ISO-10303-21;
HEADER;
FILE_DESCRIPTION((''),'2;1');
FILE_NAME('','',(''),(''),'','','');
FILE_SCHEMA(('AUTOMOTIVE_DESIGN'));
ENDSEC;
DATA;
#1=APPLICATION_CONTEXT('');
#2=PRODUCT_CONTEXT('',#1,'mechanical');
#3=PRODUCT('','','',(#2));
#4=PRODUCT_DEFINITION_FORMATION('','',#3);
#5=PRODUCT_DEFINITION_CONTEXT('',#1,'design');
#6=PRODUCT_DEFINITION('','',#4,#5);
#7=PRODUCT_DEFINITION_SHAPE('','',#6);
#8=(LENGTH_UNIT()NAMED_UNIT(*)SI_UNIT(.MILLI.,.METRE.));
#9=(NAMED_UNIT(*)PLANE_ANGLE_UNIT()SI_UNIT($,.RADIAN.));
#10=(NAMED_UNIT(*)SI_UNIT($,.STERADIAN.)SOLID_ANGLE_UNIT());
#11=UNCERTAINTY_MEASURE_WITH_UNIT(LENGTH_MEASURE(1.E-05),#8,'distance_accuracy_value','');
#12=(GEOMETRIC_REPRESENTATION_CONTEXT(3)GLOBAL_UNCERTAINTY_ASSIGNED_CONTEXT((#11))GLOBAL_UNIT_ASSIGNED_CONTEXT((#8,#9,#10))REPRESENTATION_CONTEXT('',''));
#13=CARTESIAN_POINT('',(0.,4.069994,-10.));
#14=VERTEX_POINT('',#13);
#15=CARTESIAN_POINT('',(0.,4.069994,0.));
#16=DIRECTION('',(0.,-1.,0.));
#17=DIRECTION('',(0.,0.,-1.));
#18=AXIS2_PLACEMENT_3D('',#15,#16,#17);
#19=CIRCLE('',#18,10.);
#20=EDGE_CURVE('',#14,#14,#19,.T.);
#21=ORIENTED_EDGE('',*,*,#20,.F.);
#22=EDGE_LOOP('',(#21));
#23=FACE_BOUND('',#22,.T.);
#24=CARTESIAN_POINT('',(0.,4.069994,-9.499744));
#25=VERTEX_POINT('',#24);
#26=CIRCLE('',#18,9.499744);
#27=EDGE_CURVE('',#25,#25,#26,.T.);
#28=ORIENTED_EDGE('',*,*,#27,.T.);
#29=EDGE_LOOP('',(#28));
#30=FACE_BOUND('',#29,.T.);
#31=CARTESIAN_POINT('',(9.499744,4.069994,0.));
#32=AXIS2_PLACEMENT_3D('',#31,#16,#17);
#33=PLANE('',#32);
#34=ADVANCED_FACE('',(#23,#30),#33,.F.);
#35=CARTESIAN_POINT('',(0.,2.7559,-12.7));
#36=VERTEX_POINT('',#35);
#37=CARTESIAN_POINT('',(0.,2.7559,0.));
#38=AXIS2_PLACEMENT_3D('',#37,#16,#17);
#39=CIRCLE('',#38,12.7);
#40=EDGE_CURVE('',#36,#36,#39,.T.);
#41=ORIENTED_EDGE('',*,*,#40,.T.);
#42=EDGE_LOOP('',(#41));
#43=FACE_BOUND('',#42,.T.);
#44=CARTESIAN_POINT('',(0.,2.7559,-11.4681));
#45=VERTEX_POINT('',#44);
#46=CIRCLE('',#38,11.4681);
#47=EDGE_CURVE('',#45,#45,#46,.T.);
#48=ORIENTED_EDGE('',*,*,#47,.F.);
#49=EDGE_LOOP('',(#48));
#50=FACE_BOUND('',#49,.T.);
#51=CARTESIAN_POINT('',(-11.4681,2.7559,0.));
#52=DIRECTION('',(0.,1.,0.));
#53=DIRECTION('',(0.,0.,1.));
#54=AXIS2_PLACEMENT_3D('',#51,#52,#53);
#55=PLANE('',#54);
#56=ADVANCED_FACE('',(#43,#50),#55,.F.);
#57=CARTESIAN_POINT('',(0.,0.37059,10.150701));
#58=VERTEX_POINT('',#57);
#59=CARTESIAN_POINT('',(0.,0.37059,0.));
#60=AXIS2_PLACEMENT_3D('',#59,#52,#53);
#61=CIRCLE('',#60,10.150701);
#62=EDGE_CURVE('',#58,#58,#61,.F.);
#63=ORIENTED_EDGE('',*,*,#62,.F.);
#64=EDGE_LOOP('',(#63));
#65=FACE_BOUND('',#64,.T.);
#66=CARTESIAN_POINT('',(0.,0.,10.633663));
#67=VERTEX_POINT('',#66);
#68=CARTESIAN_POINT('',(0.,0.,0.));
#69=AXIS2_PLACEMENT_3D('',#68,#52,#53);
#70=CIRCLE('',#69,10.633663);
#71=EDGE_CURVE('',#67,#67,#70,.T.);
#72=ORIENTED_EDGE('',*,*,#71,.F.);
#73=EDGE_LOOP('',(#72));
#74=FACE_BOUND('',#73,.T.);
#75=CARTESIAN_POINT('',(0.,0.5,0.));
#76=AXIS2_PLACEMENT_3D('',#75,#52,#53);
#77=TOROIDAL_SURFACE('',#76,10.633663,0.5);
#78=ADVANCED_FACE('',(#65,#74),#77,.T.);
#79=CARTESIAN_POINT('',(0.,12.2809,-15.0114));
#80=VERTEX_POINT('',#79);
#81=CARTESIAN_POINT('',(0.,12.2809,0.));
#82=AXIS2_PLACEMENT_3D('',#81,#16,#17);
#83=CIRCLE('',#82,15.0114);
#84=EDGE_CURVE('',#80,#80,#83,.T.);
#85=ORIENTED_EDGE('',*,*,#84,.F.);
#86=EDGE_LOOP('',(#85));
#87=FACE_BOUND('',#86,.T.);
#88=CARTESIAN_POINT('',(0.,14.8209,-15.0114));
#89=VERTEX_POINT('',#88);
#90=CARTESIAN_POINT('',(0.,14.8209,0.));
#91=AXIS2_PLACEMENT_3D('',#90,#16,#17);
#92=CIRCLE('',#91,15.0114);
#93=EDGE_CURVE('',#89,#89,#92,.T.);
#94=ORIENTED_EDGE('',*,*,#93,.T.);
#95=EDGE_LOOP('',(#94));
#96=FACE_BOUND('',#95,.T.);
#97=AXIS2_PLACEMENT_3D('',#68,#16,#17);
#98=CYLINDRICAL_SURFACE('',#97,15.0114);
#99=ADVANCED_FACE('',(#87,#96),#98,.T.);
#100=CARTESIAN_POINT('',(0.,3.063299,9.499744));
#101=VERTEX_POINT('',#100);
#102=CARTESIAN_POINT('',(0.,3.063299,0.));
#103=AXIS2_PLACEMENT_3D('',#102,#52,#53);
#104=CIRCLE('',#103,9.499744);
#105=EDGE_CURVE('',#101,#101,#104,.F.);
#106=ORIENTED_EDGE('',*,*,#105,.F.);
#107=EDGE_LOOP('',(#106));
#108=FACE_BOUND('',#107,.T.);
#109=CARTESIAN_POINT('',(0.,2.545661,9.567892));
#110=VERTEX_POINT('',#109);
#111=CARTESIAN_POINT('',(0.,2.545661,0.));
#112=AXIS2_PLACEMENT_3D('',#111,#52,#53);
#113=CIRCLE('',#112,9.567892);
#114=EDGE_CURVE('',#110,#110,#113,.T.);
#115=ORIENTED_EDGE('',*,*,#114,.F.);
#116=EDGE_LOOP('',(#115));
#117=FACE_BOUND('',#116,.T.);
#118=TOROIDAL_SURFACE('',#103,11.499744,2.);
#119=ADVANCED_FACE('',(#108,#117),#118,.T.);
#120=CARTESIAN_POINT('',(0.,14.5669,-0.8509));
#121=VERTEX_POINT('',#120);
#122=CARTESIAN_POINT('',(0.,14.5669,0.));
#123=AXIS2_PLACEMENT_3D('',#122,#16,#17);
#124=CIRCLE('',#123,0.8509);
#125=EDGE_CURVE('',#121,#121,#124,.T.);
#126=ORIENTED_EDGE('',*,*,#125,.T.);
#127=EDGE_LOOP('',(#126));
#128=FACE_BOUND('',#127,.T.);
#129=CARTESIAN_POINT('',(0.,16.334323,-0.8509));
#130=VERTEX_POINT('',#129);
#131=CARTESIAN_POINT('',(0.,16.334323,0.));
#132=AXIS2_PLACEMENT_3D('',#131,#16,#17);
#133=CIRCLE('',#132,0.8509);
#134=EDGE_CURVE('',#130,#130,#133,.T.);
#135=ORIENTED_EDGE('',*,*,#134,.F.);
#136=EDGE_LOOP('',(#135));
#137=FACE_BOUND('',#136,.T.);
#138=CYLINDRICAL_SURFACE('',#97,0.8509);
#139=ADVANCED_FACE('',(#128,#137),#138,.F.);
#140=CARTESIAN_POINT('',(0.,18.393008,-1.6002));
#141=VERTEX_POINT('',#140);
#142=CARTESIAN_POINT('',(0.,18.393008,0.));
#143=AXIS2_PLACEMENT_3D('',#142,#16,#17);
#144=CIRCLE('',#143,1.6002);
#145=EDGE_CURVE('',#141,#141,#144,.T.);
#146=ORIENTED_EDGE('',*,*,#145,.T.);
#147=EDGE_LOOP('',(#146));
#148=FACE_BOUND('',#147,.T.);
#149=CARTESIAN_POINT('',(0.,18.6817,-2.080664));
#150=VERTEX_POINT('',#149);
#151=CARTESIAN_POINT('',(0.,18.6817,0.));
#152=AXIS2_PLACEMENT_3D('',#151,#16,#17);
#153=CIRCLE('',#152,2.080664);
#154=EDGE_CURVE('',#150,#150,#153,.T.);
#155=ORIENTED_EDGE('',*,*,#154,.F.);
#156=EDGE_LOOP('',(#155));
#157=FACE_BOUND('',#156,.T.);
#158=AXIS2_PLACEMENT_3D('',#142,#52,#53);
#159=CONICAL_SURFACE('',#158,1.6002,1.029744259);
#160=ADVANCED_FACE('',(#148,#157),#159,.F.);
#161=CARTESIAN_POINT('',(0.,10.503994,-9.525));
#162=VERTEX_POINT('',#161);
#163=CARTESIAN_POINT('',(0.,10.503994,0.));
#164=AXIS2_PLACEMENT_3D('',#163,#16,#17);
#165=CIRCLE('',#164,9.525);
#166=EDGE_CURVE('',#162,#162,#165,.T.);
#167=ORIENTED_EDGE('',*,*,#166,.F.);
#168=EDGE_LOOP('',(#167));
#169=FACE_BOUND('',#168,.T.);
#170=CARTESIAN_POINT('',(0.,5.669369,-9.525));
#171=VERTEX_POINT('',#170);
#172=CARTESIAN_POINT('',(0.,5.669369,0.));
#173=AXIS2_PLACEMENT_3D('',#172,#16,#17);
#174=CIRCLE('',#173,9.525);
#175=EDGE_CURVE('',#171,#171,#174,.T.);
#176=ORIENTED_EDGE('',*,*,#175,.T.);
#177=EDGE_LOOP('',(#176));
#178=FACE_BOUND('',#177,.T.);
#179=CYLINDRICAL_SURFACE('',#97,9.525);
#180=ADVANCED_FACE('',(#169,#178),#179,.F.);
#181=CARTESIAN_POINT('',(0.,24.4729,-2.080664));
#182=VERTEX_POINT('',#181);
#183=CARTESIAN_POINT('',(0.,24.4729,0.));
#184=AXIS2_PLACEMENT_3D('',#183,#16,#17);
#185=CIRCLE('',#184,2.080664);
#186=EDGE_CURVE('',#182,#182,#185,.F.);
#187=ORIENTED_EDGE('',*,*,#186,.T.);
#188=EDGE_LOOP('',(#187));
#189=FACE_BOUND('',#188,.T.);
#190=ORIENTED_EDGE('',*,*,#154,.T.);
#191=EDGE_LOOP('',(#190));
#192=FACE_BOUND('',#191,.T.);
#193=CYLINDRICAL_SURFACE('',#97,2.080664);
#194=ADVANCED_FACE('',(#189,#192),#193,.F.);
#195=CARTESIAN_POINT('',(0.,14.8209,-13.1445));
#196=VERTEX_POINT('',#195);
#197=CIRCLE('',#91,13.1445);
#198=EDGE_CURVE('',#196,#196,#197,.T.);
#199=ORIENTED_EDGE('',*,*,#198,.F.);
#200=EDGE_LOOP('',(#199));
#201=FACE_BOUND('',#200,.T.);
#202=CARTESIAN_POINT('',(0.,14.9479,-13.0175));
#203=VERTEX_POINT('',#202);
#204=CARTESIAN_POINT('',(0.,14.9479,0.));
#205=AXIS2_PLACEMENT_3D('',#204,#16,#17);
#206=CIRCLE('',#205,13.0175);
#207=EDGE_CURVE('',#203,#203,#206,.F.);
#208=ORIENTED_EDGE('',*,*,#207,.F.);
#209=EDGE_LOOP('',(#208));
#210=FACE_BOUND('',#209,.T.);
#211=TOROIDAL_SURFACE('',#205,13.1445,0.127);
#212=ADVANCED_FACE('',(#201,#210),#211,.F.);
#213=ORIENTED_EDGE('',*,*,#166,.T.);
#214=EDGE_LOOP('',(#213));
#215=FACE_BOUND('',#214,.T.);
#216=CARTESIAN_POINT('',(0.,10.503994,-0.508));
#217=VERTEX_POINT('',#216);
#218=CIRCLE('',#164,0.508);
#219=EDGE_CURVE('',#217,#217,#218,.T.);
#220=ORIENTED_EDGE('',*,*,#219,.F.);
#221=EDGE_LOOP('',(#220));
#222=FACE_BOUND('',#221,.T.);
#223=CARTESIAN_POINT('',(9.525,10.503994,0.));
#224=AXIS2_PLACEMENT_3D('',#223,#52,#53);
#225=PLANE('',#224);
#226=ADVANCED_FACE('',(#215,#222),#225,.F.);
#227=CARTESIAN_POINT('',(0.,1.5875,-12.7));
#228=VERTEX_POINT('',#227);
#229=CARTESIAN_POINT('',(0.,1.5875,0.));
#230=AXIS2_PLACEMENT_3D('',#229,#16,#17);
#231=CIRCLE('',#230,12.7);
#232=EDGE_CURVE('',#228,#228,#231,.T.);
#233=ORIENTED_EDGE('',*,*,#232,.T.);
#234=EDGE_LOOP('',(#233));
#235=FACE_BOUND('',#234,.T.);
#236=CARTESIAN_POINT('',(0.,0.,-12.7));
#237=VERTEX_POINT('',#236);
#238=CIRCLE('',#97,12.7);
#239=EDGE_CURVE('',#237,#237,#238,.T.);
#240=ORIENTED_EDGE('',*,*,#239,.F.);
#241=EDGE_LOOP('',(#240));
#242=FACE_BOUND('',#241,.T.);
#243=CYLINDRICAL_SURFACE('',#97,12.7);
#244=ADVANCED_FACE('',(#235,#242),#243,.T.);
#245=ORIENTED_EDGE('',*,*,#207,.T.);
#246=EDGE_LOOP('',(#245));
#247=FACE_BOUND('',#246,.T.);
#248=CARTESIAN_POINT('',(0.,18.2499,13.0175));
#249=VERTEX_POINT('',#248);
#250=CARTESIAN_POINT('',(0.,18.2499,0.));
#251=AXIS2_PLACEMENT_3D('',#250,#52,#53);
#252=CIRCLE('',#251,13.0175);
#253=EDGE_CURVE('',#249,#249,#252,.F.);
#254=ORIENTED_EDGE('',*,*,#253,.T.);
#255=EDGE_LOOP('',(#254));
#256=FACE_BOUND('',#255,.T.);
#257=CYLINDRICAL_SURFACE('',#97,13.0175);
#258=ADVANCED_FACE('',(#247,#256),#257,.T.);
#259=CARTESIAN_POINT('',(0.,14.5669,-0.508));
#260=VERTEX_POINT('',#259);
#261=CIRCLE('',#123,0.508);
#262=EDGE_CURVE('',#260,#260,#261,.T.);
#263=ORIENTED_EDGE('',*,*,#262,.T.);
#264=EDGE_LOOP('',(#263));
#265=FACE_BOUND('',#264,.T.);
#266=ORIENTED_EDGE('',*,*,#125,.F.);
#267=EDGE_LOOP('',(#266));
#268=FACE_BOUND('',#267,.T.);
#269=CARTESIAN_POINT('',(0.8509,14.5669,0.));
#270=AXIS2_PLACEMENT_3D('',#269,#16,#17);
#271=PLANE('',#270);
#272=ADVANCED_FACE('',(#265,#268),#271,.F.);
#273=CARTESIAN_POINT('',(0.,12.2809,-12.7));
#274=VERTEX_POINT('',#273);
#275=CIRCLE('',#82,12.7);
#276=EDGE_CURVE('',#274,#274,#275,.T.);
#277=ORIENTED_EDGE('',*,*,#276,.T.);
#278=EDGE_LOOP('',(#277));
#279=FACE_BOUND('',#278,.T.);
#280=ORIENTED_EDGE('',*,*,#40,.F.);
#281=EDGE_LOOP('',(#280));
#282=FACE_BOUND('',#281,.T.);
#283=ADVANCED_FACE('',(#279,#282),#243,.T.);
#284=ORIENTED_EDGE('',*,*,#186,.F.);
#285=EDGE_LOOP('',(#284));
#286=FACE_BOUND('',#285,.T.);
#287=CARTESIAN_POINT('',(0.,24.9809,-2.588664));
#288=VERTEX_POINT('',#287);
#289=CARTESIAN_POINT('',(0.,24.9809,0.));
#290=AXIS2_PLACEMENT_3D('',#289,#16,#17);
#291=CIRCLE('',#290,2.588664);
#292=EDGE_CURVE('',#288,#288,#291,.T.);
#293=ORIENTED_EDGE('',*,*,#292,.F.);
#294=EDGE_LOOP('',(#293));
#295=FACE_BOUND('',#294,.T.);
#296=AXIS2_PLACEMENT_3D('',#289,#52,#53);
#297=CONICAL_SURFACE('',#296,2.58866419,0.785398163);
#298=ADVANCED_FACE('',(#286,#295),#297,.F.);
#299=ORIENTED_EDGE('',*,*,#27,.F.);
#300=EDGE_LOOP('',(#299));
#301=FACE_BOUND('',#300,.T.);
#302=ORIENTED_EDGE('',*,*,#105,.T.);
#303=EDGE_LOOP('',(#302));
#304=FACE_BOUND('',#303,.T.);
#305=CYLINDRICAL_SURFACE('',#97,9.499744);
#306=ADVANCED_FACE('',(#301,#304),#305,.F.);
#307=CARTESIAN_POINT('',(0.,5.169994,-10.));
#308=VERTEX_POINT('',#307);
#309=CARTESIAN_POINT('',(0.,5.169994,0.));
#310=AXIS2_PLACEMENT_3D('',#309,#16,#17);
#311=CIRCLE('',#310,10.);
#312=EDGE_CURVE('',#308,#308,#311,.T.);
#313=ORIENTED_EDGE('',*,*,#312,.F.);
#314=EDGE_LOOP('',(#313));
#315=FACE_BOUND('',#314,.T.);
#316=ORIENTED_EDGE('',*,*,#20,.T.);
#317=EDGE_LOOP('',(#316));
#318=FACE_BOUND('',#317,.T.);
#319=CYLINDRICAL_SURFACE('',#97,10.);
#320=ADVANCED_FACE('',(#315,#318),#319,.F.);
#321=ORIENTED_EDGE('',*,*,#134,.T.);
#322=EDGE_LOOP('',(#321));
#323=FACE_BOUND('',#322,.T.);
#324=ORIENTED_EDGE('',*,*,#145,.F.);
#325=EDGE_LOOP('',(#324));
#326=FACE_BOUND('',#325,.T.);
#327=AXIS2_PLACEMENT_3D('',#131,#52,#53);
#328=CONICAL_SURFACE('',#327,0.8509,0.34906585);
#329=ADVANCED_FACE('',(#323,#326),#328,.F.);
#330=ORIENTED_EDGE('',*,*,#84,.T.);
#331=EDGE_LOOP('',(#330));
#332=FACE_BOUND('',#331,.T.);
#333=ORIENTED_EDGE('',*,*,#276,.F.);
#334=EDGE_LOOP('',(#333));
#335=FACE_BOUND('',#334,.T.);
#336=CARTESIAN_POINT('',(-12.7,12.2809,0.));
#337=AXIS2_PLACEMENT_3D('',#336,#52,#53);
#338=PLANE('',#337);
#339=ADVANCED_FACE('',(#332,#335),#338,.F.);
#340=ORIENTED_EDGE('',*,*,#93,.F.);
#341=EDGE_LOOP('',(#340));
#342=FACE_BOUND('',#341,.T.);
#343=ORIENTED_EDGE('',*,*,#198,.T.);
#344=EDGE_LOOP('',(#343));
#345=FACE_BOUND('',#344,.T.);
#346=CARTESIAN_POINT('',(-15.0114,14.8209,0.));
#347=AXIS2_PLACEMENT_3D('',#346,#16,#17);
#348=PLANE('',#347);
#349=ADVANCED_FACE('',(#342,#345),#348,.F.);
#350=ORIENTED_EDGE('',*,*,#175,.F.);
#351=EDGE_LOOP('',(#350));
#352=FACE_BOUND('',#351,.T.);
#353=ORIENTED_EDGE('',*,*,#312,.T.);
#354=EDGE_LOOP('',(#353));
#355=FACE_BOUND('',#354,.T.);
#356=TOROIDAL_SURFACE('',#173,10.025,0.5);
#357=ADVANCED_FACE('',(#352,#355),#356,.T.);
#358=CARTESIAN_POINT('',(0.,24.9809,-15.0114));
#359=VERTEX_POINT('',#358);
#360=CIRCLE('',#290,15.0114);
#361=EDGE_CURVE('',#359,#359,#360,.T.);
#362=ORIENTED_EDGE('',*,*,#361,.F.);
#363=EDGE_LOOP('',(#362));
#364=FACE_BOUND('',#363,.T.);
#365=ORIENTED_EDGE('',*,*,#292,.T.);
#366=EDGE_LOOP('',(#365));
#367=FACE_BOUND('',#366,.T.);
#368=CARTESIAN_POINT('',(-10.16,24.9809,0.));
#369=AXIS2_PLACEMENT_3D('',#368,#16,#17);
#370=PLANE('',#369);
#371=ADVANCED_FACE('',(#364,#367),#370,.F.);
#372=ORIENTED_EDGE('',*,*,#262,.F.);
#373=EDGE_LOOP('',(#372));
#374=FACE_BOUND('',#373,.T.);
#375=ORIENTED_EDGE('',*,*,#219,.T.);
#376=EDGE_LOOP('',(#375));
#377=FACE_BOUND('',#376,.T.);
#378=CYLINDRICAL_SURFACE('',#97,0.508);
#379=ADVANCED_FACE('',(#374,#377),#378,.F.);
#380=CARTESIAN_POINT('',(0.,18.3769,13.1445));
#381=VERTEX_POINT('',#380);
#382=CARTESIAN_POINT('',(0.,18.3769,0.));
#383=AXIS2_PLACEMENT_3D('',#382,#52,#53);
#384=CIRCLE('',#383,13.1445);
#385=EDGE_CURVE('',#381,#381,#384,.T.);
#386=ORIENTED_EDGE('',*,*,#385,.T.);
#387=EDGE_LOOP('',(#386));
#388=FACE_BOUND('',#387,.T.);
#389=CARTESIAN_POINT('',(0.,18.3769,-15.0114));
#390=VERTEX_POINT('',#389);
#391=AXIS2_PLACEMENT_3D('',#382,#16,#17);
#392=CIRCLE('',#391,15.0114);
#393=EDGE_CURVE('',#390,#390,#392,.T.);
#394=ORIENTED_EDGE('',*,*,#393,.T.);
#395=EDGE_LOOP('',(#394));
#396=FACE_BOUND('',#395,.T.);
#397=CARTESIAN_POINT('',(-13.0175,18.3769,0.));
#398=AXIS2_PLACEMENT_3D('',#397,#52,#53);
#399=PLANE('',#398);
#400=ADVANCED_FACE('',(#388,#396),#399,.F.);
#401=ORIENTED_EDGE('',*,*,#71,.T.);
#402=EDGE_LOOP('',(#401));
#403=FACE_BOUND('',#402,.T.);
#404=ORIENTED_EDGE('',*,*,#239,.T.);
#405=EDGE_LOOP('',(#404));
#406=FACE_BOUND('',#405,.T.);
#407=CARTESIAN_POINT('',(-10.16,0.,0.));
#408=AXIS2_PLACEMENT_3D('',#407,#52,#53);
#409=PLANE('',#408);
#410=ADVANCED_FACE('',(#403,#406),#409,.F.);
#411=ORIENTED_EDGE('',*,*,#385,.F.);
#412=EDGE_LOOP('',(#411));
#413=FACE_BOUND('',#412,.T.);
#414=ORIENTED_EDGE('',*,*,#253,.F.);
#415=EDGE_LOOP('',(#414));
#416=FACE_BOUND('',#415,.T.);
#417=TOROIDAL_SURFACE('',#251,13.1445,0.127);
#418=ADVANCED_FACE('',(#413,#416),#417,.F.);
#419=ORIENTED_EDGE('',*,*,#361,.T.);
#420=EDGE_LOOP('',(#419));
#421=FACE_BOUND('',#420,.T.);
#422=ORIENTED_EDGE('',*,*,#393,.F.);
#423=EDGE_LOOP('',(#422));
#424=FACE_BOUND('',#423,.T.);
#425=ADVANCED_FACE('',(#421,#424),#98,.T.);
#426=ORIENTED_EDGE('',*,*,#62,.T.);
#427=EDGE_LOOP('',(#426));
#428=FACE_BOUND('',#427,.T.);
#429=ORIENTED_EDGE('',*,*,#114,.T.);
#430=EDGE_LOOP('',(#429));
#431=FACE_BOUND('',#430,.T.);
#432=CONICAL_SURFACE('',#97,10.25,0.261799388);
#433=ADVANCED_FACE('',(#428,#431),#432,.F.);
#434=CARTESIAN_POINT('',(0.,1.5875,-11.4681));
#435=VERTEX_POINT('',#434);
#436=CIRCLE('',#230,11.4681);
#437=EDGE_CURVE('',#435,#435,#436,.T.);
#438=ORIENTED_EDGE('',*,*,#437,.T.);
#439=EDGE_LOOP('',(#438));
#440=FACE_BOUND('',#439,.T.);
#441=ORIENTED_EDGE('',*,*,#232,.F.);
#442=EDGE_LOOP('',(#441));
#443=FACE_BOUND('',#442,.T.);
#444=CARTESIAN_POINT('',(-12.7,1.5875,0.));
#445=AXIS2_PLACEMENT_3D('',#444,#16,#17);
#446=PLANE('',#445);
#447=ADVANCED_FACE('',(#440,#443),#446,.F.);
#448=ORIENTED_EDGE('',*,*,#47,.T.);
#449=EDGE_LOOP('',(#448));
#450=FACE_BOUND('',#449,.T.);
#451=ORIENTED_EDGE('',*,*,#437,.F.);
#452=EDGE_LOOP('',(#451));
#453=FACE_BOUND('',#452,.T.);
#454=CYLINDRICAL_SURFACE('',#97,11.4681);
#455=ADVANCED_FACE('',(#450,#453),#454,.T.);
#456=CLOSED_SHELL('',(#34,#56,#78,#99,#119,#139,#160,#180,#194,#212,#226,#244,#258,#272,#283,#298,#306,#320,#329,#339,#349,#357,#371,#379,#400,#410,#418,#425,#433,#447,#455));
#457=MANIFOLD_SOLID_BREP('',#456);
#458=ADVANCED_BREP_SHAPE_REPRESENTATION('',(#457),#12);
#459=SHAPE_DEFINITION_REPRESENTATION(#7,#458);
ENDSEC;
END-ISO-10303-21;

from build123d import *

# Parameters (mm, degrees)
FILLET4_R     = 0.127
FILLET1_R     = 0.5
FILLET2_R     = 2
CHAMFER4_SIZE = 0.508


with BuildPart() as part:
    # Sketch1 → Revolve1 (revolve)
    with BuildSketch(Plane.XY, mode=Mode.PRIVATE) as revolve1_sk:
        Polygon((-10.16, 0), (-12.7, 0), (-12.7, 1.5875), (-11.4681, 1.5875), (-11.4681, 2.7559), (-12.7, 2.7559), (-12.7, 12.2809), (-15.0114, 12.2809), (-15.0114, 14.8209), (-13.0175, 14.8209), (-13.0175, 18.3769), (-15.0114, 18.3769), (-15.0114, 24.9809), (-10.16, 24.9809), (0, 24.9809), (0, 0), align=None)
    revolve(revolve1_sk.sketch.rotate(Axis((0, 0, 0), (0, 1, 0)), 270), axis=Axis((0, 0, 0), (0, 1, 0)))

    # Fillet4
    fillet4_edges = [part.edges().sort_by_distance(p)[0] for p in [
        (0, 18.3769, 13.0175),
        (0, 14.8209, 13.0175),
    ]]
    fillet(fillet4_edges, radius=FILLET4_R)

    # Sketch9 → Cut-Revolve2 (revolve, cut)
    with BuildSketch(Plane.XY, mode=Mode.PRIVATE) as cut_revolve2_sk:
        Polygon((10.25, 0), (9.499743762, 2.7999944), (9.499743762, 4.0699944), (10, 4.0699944), (10, 5.1699944), (9.525, 5.1699944), (9.525, 10.5039944), (0.396875, 10.5039944), (0.396875, 24.9809), (0, 24.9809), (0, 0), align=None)
    revolve(cut_revolve2_sk.sketch.rotate(Axis((0, 0, 0), (0, 1, 0)), 90), axis=Axis((0, 0, 0), (0, 1, 0)), mode=Mode.SUBTRACT)

    # Fillet1
    # the kernel refuses this fillet: 0.5 mm, written as the material it takes off along each edge
    with BuildSketch(Plane(origin=(0, 0, 0), x_dir=(0, 0, -1), z_dir=(1, 0, 0))) as fillet1_piece_1:
        with BuildLine():
            CenterArc((10.25 + FILLET1_R * 0.767326987979, FILLET1_R), FILLET1_R, 195, 75)
            Line((10.25 - FILLET1_R * 0.19859883831, FILLET1_R * 0.741180954897), (10.25, 0))
            Line((10.25, 0), (10.25 + FILLET1_R * 0.767326987979, 0))
        make_face()
    revolve(axis=Axis((0, 0, 0), (0, 1, 0)), mode=Mode.SUBTRACT)
    with BuildSketch(Plane(origin=(0, 5.1699944, 0), x_dir=(0, 0, -1), z_dir=(1, 0, 0))) as fillet1_piece_2_section:
        with BuildLine():
            CenterArc((9.525 + FILLET1_R, FILLET1_R), FILLET1_R, 180, 90)
            Line((9.525 + FILLET1_R, 0), (9.525, 0))
            Line((9.525, 0), (9.525, FILLET1_R))
        make_face()
    fillet1_piece_2 = revolve(axis=Axis((0, 5.1699944, 0), (0, 1, 0)), mode=Mode.PRIVATE)
    fillet1_piece_2 = fillet1_piece_2 & Plane(origin=(0, 5.314596345, 0), x_dir=(0, 0, -1), z_dir=(0, 1, 0)) * Cylinder(10, 41, mode=Mode.PRIVATE)
    add(fillet1_piece_2, mode=Mode.SUBTRACT)

    # Fillet2
    fillet2_edges = [part.edges().sort_by_distance(p)[0] for p in [
        (0, 2.7999944, 9.499743762),
    ]]
    fillet(fillet2_edges, radius=FILLET2_R)

    # Sketch11 → Upchurch Cone Fitting (revolve, cut)
    with BuildSketch(Plane.XY, mode=Mode.PRIVATE) as upchurch_cone_fitting_sk:
        Polygon((0.508, 14.5669), (0.508, 10.5039944), (0, 10.5039944), (0, 24.9809), (2.08066419, 24.9809), (2.08066419, 18.6817), (1.6002, 18.39300799), (0.8509, 16.334323159), (0.8509, 14.5669), align=None)
    revolve(upchurch_cone_fitting_sk.sketch.rotate(Axis((0, 0, 0), (0, 1, 0)), 90), axis=Axis((0, 0, 0), (0, 1, 0)), mode=Mode.SUBTRACT)

    # Chamfer4
    chamfer4_edges = [part.edges().sort_by_distance(p)[0] for p in [
        (0, 24.9809, 2.08066419),
    ]]
    chamfer(chamfer4_edges, length=CHAMFER4_SIZE)


solid = part.part
